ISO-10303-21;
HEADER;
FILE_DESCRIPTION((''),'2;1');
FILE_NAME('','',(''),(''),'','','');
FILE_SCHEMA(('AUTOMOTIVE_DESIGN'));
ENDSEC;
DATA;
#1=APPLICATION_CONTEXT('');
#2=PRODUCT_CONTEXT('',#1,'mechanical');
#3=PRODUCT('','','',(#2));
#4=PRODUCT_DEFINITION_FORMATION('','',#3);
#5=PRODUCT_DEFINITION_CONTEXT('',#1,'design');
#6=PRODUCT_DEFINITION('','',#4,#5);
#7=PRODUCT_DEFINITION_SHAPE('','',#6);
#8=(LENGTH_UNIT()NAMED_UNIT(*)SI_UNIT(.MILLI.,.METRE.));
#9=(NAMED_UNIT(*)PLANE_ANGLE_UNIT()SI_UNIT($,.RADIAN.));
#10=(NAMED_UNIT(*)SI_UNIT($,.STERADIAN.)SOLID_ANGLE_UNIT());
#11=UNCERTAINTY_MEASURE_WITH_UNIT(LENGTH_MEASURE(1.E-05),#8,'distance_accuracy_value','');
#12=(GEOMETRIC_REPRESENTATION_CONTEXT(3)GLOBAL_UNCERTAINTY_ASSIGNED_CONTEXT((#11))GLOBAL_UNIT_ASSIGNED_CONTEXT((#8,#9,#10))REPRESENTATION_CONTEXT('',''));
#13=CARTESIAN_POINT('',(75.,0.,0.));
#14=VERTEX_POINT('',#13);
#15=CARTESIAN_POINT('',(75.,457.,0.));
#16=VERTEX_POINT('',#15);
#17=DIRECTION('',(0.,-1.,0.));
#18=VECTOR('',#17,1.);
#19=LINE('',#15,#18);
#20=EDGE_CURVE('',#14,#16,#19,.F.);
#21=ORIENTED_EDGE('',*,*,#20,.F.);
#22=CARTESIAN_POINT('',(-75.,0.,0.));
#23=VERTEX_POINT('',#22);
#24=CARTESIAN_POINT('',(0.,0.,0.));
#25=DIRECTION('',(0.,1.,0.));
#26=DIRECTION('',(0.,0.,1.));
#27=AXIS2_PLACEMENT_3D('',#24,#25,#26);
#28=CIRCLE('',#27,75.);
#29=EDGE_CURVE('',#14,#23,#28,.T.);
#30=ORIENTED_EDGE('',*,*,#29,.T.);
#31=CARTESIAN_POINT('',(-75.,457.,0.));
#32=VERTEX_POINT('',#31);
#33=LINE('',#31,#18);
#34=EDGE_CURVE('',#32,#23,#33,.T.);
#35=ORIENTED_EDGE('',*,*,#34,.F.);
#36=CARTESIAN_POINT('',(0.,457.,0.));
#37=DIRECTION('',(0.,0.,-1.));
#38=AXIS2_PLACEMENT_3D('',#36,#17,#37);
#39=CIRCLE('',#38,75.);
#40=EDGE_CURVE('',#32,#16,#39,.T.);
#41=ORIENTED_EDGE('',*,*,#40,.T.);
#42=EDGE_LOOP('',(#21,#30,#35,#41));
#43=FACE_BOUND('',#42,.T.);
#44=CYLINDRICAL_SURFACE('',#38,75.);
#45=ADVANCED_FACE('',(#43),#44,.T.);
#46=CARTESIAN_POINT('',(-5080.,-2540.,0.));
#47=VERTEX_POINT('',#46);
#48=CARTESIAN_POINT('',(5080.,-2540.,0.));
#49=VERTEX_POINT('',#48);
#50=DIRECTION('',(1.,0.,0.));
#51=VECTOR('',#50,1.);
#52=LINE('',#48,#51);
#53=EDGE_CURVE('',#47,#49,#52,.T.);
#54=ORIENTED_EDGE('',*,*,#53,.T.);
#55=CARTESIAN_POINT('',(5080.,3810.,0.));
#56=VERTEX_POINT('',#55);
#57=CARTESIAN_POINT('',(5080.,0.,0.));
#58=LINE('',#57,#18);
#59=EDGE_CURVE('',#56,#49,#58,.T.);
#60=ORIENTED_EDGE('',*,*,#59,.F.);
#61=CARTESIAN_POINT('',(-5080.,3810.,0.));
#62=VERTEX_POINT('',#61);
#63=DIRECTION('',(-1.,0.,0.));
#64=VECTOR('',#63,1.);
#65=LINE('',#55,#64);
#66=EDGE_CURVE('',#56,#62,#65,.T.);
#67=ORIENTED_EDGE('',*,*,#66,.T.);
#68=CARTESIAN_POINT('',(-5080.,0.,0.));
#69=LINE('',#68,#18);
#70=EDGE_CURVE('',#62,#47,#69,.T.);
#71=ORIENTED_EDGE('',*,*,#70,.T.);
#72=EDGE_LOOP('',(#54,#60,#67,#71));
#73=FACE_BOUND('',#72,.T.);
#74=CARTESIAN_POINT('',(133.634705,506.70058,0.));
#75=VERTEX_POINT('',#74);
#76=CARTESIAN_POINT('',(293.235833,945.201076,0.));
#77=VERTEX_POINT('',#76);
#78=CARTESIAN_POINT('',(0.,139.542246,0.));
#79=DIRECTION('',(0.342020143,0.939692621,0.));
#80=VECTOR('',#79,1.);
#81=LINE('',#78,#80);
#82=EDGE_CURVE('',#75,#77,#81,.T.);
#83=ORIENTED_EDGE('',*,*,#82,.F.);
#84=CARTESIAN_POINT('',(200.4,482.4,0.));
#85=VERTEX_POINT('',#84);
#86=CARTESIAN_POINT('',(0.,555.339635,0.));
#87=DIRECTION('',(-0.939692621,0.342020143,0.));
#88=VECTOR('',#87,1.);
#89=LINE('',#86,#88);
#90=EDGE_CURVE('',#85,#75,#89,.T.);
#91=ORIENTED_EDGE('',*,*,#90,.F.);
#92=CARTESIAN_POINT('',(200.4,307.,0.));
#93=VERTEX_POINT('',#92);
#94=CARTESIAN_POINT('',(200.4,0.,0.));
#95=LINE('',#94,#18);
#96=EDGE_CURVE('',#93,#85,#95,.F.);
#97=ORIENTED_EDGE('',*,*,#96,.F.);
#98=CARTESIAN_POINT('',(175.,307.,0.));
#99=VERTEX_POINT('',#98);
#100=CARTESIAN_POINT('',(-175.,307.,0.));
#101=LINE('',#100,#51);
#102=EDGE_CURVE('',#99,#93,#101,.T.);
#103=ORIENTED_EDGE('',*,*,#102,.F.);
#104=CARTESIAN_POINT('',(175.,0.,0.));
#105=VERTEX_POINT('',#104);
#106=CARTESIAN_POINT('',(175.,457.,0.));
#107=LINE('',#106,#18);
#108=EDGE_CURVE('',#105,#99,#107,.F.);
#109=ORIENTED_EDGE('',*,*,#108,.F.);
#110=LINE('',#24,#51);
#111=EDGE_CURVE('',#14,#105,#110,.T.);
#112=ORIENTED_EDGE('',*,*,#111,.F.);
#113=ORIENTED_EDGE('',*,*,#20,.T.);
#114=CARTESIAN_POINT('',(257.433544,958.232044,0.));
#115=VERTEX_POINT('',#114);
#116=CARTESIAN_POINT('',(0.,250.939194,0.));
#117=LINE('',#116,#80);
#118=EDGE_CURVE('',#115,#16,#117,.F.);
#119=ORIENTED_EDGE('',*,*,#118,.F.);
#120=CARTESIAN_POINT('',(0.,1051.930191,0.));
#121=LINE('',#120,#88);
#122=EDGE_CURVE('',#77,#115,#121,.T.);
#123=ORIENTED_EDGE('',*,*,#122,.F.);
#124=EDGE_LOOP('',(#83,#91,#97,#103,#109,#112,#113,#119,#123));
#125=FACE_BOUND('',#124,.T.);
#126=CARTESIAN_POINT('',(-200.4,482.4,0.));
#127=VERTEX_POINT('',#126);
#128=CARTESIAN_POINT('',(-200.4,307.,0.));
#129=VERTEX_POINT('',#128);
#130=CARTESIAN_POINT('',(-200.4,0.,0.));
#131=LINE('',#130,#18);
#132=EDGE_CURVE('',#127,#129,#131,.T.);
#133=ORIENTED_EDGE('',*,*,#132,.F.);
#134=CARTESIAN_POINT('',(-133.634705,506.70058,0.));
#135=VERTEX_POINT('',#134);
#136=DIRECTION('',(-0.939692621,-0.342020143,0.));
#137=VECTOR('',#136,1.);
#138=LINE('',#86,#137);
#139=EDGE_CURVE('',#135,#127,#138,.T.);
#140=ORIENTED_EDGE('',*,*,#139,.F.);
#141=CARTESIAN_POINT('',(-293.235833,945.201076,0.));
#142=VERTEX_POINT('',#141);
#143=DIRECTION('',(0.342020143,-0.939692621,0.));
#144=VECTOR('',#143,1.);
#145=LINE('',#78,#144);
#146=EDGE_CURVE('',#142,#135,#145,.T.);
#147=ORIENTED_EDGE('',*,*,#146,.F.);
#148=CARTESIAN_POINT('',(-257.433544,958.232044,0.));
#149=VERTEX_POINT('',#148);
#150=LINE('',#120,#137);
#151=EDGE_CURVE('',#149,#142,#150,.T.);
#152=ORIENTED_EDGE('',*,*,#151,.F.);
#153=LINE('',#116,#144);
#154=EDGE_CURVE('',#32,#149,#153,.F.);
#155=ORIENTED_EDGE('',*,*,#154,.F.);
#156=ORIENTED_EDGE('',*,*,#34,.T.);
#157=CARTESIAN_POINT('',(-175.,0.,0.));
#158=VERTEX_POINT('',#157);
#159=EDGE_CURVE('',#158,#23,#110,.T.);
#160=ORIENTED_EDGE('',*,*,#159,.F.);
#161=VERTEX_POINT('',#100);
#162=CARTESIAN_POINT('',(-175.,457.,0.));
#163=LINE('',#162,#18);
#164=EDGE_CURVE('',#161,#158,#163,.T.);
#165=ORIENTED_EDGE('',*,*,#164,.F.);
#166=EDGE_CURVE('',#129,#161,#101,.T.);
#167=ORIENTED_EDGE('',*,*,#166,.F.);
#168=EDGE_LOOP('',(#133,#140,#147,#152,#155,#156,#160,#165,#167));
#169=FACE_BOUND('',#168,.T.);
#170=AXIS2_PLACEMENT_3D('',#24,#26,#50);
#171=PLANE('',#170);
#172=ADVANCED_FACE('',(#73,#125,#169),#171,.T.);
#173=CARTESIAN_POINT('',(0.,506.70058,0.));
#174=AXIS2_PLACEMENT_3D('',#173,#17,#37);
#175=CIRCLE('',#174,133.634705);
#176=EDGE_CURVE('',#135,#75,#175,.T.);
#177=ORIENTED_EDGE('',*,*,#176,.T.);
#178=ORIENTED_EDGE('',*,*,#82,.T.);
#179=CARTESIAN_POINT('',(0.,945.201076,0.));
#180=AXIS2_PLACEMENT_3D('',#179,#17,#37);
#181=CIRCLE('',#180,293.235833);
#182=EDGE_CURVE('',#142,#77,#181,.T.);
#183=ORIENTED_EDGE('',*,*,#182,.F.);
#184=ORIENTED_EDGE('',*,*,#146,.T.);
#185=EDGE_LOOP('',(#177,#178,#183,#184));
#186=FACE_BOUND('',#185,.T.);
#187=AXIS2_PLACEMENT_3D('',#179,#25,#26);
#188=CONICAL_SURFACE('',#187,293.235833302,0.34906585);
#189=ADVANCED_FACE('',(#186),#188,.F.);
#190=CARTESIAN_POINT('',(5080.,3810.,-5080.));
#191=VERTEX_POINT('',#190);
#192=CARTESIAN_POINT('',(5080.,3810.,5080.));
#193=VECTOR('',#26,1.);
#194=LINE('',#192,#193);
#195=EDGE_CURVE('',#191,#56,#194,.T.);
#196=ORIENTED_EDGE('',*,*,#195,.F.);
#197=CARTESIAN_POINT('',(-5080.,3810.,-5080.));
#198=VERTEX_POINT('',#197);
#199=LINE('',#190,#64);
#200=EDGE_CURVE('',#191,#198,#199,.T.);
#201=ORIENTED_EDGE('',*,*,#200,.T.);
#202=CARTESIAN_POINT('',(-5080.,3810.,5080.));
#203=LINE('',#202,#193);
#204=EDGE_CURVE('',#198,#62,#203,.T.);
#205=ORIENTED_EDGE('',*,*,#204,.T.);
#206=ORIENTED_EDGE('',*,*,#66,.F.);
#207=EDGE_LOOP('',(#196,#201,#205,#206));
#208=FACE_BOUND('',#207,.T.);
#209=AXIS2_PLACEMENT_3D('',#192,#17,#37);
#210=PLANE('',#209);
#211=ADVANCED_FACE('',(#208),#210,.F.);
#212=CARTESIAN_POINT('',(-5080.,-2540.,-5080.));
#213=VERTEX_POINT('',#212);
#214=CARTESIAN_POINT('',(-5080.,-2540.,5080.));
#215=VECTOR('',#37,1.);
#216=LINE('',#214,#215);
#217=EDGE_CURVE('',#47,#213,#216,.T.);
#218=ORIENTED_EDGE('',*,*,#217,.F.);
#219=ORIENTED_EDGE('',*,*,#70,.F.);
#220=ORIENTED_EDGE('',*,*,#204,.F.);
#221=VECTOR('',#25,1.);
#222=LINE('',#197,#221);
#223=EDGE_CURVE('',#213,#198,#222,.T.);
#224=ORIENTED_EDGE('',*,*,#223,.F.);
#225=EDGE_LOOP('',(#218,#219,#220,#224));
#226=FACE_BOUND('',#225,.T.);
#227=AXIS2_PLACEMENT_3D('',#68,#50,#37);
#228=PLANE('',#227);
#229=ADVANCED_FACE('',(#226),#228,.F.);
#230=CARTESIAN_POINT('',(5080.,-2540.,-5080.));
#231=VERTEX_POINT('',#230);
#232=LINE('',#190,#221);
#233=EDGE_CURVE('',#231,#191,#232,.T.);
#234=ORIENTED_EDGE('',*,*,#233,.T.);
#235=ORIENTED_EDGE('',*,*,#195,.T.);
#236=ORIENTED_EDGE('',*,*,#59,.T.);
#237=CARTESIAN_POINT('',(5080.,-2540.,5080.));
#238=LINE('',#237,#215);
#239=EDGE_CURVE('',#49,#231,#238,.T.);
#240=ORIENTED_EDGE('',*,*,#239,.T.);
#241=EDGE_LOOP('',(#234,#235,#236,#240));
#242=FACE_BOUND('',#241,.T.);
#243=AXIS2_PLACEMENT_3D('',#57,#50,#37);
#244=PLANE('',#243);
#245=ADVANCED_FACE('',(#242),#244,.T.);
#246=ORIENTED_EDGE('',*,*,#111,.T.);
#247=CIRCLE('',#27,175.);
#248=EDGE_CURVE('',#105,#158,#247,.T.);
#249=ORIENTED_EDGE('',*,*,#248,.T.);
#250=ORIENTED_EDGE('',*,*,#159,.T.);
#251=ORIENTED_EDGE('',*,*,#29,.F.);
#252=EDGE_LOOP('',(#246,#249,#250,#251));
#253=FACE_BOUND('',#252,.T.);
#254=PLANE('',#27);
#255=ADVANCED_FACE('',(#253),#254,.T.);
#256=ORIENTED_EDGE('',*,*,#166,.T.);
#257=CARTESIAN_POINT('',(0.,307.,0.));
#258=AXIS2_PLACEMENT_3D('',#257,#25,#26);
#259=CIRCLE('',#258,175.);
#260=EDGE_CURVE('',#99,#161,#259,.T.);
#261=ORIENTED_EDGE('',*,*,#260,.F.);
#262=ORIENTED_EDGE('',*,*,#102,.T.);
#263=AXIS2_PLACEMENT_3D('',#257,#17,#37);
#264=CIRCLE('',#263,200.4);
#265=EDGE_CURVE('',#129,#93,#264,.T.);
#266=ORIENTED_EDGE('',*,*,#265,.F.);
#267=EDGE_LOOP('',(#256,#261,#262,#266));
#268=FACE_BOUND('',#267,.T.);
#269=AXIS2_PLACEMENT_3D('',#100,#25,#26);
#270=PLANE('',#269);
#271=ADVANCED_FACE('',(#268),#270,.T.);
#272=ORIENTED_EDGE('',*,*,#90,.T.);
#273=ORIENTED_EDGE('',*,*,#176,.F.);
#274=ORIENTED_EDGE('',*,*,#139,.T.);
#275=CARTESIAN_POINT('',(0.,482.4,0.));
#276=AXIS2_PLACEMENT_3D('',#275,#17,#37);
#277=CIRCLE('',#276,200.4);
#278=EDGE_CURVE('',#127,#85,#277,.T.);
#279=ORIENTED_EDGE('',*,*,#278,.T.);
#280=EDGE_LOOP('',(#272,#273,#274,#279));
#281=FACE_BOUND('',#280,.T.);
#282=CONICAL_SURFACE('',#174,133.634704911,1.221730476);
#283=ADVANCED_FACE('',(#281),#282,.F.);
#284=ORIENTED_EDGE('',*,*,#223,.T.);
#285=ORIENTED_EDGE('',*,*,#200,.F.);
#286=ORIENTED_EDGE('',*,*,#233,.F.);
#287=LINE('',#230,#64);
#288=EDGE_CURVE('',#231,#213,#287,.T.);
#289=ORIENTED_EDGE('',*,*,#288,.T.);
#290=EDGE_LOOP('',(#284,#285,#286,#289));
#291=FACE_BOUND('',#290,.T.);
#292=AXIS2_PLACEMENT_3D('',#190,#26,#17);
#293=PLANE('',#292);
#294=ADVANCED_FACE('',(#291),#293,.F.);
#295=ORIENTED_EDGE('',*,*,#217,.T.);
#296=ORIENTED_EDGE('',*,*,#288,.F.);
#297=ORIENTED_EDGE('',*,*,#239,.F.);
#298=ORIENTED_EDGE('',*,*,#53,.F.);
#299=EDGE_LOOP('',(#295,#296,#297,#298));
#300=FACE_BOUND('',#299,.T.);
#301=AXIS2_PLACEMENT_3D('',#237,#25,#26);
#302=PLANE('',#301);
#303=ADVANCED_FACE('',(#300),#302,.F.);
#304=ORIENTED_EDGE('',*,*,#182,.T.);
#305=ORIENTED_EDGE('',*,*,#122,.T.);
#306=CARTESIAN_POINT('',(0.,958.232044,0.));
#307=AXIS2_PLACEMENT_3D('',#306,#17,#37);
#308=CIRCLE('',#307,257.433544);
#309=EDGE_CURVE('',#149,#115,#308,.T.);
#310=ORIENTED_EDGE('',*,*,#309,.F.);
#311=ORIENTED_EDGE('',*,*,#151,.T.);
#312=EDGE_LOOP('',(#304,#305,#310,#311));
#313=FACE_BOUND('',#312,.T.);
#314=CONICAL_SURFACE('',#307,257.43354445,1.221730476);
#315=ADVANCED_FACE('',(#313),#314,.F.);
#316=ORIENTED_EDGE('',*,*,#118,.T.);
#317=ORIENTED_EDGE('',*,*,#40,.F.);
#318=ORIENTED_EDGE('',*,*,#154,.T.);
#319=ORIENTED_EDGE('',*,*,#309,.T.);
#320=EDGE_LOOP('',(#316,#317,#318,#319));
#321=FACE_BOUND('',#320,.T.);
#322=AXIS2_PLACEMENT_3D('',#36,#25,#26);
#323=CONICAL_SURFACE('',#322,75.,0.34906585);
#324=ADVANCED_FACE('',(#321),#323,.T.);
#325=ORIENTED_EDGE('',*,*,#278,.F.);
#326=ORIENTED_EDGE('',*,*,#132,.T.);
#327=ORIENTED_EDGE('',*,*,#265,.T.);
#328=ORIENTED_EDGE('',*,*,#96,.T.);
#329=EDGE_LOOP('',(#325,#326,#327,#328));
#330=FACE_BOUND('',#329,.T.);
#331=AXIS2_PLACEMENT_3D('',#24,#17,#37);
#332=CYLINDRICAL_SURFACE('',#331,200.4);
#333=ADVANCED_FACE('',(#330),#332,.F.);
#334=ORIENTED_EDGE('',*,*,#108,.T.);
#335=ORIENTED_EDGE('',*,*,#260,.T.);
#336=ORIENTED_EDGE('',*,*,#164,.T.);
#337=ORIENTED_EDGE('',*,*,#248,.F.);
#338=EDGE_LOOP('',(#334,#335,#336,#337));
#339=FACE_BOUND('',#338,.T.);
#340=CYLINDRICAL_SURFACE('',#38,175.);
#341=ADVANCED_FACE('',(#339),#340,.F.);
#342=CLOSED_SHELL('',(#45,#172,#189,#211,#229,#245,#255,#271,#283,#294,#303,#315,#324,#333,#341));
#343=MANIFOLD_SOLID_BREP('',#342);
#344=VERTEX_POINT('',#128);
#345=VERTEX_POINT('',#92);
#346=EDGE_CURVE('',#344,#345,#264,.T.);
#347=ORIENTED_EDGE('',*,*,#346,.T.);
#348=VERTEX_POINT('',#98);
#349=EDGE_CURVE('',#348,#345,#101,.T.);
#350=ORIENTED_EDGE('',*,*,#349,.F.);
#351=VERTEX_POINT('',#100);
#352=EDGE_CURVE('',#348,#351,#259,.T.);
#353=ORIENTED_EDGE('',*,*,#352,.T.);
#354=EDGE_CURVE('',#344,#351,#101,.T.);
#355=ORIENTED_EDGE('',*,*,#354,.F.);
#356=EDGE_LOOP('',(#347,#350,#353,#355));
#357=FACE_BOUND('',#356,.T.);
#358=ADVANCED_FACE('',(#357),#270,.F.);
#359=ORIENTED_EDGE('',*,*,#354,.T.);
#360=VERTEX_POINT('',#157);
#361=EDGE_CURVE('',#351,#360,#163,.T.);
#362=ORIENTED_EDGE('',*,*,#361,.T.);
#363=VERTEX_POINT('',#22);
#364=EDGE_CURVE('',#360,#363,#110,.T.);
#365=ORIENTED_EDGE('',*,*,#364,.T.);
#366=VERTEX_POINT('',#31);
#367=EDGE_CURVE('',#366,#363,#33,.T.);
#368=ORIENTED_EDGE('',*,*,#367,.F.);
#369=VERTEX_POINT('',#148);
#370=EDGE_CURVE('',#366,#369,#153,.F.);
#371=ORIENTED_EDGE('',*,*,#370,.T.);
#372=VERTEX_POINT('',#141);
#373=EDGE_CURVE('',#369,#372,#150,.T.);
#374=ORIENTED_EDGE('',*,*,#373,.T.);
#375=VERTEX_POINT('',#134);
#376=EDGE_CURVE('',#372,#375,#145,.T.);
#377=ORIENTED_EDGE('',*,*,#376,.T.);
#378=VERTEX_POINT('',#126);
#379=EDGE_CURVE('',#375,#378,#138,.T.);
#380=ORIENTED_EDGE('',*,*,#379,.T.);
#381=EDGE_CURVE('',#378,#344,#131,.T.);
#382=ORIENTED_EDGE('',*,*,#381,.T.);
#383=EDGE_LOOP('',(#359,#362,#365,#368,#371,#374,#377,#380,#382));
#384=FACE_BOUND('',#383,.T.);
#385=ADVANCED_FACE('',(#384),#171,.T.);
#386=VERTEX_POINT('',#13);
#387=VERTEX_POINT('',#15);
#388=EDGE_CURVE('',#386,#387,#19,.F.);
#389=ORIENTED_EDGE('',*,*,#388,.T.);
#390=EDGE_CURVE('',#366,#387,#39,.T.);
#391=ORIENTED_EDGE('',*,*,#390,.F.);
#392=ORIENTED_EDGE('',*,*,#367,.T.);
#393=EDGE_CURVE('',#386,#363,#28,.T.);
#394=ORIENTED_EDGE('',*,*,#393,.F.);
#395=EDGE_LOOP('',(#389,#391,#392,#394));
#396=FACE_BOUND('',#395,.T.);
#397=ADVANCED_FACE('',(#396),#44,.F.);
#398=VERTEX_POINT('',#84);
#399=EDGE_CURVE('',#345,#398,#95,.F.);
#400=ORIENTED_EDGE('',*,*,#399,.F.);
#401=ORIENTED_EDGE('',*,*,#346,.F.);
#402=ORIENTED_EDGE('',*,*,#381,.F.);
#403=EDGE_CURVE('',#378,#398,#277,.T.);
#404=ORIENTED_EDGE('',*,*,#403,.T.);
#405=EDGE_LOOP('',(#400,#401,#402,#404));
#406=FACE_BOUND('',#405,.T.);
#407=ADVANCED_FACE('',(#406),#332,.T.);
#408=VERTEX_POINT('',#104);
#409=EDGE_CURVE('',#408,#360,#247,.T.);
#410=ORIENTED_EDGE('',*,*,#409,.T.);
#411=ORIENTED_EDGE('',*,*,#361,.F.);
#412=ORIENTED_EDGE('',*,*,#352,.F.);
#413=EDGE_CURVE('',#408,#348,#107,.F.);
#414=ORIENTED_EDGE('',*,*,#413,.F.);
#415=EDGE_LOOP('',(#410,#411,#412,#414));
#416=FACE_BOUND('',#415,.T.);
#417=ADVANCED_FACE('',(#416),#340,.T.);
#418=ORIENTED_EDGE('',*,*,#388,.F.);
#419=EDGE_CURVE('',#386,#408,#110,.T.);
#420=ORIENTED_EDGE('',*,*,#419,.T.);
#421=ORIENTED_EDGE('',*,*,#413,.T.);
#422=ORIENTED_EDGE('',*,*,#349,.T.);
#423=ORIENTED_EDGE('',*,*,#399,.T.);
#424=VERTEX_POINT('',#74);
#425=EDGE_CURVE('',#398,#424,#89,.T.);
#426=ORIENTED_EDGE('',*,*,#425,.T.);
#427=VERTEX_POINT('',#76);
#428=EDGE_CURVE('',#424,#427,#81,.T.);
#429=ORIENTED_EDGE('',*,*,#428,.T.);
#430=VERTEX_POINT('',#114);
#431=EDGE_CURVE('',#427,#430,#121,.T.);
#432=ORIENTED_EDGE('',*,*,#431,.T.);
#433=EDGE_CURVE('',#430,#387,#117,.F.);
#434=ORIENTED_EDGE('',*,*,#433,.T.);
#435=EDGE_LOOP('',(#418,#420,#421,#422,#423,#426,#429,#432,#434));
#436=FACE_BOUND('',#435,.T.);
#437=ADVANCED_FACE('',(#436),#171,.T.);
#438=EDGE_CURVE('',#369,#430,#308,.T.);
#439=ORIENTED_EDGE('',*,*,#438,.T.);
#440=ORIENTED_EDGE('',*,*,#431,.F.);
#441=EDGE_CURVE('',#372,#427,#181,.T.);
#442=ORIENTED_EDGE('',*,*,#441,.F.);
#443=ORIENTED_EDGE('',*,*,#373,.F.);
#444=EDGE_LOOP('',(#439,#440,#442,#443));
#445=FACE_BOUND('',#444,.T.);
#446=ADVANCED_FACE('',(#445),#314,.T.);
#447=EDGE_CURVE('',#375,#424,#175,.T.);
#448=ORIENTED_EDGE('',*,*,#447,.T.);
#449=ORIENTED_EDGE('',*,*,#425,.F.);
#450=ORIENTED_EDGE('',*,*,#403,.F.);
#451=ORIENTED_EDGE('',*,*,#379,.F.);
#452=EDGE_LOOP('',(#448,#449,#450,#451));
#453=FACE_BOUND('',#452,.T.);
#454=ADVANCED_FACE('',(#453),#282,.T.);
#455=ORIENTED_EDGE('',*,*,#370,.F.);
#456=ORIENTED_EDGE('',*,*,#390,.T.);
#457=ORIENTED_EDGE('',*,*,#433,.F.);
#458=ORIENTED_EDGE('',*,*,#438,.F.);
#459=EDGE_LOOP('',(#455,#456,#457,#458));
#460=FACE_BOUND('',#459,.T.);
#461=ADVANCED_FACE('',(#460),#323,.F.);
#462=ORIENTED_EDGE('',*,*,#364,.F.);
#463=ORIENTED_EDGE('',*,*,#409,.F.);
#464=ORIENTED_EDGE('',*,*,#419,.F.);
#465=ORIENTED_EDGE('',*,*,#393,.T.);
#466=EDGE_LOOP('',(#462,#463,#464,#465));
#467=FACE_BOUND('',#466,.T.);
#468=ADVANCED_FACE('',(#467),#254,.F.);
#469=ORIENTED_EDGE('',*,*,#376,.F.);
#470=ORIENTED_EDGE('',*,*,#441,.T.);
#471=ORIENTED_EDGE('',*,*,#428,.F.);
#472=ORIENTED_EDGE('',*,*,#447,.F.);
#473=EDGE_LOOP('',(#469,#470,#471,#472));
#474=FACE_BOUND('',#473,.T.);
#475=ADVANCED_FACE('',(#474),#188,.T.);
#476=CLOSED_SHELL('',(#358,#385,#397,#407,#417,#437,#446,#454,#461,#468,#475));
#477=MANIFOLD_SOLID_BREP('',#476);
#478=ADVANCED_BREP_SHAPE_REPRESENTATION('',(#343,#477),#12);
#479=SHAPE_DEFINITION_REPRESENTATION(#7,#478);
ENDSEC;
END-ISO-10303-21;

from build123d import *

# Parameters (mm, degrees)
SKETCH1_R           = 175
SKETCH1_R_2         = 75
BOSS_EXTRUDE1_DEPTH = 457
SKETCH3_W           = 10160
SKETCH3_H           = 6350
BOSS_EXTRUDE2_DEPTH = 5080
SKETCH4_W           = 13475.768327993
SKETCH4_H           = 8367.586519284
CUT_EXTRUDE1_DEPTH  = 8132.96778154


with BuildPart() as part:
    # Sketch1 → Boss-Extrude1 (new body)
    with BuildSketch(Plane(origin=(0, 0, 0), x_dir=(1, 0, 0), z_dir=(0, 1, 0))):
        with Locations(Location((0, 0, 0), (0, 0, 270))):
            Circle(SKETCH1_R)
        with Locations(Location((0, 0, 0), (0, 0, 270))):
            Circle(SKETCH1_R_2, mode=Mode.SUBTRACT)
    extrude(amount=BOSS_EXTRUDE1_DEPTH)

    # Sketch2 → Revolve1 (revolve)
    with BuildSketch(Plane.XY, mode=Mode.PRIVATE) as revolve1_sk:
        Polygon((-175, 307), (-200.4, 307), (-200.4, 482.4), (-133.634704911, 506.700580094), (-293.235833302, 945.201076466), (-257.43354445, 958.232043927), (-101.061934921, 528.604577704), (-75, 457), (-175, 457), align=None)
    revolve(revolve1_sk.sketch.rotate(Axis((0, 0, 0), (0, 1, 0)), 270), axis=Axis((0, 0, 0), (0, 1, 0)))


with BuildPart() as body_2:
    # Sketch3 → Boss-Extrude2 (new, symmetric)
    with BuildSketch(Plane(origin=(0, 0, 0), x_dir=(0, 0, -1), z_dir=(1, 0, 0))):
        with Locations((0, 635)):
            Rectangle(SKETCH3_W, SKETCH3_H)
    extrude(amount=BOSS_EXTRUDE2_DEPTH, both=True)

    # Intersect1: read off the stored shape, not the designer's step
    # Intersect1 outline → Intersect1 (revolve, cut)
    with BuildSketch(Plane.XY):
        Polygon((75, 457), (75, 0), (175, 0), (175, 307), (200.4, 307), (200.4, 482.4), (133.634704911, 506.700580094), (293.235833302, 945.201076466), (257.43354445, 958.232043927), align=None)
    revolve(axis=Axis((0, 0, 0), (0, 1, 0)), mode=Mode.SUBTRACT)


with BuildPart() as cut_extrude1_tool:
    # Sketch4 → Cut-Extrude1 (new, through all)
    with BuildSketch(Plane.XY):
        with Locations((454.179344916, 464.014834855)):
            Rectangle(SKETCH4_W, SKETCH4_H)
    extrude(amount=CUT_EXTRUDE1_DEPTH)


with BuildPart() as part_1:
    add(part.part)

    # Cut-Extrude1: cut by cut_extrude1_tool
    add(cut_extrude1_tool.part, mode=Mode.SUBTRACT)


with BuildPart() as body_2_1:
    add(body_2.part)

    # Cut-Extrude1: cut by cut_extrude1_tool
    add(cut_extrude1_tool.part, mode=Mode.SUBTRACT)


solid = Compound([part_1.part, body_2_1.part])
